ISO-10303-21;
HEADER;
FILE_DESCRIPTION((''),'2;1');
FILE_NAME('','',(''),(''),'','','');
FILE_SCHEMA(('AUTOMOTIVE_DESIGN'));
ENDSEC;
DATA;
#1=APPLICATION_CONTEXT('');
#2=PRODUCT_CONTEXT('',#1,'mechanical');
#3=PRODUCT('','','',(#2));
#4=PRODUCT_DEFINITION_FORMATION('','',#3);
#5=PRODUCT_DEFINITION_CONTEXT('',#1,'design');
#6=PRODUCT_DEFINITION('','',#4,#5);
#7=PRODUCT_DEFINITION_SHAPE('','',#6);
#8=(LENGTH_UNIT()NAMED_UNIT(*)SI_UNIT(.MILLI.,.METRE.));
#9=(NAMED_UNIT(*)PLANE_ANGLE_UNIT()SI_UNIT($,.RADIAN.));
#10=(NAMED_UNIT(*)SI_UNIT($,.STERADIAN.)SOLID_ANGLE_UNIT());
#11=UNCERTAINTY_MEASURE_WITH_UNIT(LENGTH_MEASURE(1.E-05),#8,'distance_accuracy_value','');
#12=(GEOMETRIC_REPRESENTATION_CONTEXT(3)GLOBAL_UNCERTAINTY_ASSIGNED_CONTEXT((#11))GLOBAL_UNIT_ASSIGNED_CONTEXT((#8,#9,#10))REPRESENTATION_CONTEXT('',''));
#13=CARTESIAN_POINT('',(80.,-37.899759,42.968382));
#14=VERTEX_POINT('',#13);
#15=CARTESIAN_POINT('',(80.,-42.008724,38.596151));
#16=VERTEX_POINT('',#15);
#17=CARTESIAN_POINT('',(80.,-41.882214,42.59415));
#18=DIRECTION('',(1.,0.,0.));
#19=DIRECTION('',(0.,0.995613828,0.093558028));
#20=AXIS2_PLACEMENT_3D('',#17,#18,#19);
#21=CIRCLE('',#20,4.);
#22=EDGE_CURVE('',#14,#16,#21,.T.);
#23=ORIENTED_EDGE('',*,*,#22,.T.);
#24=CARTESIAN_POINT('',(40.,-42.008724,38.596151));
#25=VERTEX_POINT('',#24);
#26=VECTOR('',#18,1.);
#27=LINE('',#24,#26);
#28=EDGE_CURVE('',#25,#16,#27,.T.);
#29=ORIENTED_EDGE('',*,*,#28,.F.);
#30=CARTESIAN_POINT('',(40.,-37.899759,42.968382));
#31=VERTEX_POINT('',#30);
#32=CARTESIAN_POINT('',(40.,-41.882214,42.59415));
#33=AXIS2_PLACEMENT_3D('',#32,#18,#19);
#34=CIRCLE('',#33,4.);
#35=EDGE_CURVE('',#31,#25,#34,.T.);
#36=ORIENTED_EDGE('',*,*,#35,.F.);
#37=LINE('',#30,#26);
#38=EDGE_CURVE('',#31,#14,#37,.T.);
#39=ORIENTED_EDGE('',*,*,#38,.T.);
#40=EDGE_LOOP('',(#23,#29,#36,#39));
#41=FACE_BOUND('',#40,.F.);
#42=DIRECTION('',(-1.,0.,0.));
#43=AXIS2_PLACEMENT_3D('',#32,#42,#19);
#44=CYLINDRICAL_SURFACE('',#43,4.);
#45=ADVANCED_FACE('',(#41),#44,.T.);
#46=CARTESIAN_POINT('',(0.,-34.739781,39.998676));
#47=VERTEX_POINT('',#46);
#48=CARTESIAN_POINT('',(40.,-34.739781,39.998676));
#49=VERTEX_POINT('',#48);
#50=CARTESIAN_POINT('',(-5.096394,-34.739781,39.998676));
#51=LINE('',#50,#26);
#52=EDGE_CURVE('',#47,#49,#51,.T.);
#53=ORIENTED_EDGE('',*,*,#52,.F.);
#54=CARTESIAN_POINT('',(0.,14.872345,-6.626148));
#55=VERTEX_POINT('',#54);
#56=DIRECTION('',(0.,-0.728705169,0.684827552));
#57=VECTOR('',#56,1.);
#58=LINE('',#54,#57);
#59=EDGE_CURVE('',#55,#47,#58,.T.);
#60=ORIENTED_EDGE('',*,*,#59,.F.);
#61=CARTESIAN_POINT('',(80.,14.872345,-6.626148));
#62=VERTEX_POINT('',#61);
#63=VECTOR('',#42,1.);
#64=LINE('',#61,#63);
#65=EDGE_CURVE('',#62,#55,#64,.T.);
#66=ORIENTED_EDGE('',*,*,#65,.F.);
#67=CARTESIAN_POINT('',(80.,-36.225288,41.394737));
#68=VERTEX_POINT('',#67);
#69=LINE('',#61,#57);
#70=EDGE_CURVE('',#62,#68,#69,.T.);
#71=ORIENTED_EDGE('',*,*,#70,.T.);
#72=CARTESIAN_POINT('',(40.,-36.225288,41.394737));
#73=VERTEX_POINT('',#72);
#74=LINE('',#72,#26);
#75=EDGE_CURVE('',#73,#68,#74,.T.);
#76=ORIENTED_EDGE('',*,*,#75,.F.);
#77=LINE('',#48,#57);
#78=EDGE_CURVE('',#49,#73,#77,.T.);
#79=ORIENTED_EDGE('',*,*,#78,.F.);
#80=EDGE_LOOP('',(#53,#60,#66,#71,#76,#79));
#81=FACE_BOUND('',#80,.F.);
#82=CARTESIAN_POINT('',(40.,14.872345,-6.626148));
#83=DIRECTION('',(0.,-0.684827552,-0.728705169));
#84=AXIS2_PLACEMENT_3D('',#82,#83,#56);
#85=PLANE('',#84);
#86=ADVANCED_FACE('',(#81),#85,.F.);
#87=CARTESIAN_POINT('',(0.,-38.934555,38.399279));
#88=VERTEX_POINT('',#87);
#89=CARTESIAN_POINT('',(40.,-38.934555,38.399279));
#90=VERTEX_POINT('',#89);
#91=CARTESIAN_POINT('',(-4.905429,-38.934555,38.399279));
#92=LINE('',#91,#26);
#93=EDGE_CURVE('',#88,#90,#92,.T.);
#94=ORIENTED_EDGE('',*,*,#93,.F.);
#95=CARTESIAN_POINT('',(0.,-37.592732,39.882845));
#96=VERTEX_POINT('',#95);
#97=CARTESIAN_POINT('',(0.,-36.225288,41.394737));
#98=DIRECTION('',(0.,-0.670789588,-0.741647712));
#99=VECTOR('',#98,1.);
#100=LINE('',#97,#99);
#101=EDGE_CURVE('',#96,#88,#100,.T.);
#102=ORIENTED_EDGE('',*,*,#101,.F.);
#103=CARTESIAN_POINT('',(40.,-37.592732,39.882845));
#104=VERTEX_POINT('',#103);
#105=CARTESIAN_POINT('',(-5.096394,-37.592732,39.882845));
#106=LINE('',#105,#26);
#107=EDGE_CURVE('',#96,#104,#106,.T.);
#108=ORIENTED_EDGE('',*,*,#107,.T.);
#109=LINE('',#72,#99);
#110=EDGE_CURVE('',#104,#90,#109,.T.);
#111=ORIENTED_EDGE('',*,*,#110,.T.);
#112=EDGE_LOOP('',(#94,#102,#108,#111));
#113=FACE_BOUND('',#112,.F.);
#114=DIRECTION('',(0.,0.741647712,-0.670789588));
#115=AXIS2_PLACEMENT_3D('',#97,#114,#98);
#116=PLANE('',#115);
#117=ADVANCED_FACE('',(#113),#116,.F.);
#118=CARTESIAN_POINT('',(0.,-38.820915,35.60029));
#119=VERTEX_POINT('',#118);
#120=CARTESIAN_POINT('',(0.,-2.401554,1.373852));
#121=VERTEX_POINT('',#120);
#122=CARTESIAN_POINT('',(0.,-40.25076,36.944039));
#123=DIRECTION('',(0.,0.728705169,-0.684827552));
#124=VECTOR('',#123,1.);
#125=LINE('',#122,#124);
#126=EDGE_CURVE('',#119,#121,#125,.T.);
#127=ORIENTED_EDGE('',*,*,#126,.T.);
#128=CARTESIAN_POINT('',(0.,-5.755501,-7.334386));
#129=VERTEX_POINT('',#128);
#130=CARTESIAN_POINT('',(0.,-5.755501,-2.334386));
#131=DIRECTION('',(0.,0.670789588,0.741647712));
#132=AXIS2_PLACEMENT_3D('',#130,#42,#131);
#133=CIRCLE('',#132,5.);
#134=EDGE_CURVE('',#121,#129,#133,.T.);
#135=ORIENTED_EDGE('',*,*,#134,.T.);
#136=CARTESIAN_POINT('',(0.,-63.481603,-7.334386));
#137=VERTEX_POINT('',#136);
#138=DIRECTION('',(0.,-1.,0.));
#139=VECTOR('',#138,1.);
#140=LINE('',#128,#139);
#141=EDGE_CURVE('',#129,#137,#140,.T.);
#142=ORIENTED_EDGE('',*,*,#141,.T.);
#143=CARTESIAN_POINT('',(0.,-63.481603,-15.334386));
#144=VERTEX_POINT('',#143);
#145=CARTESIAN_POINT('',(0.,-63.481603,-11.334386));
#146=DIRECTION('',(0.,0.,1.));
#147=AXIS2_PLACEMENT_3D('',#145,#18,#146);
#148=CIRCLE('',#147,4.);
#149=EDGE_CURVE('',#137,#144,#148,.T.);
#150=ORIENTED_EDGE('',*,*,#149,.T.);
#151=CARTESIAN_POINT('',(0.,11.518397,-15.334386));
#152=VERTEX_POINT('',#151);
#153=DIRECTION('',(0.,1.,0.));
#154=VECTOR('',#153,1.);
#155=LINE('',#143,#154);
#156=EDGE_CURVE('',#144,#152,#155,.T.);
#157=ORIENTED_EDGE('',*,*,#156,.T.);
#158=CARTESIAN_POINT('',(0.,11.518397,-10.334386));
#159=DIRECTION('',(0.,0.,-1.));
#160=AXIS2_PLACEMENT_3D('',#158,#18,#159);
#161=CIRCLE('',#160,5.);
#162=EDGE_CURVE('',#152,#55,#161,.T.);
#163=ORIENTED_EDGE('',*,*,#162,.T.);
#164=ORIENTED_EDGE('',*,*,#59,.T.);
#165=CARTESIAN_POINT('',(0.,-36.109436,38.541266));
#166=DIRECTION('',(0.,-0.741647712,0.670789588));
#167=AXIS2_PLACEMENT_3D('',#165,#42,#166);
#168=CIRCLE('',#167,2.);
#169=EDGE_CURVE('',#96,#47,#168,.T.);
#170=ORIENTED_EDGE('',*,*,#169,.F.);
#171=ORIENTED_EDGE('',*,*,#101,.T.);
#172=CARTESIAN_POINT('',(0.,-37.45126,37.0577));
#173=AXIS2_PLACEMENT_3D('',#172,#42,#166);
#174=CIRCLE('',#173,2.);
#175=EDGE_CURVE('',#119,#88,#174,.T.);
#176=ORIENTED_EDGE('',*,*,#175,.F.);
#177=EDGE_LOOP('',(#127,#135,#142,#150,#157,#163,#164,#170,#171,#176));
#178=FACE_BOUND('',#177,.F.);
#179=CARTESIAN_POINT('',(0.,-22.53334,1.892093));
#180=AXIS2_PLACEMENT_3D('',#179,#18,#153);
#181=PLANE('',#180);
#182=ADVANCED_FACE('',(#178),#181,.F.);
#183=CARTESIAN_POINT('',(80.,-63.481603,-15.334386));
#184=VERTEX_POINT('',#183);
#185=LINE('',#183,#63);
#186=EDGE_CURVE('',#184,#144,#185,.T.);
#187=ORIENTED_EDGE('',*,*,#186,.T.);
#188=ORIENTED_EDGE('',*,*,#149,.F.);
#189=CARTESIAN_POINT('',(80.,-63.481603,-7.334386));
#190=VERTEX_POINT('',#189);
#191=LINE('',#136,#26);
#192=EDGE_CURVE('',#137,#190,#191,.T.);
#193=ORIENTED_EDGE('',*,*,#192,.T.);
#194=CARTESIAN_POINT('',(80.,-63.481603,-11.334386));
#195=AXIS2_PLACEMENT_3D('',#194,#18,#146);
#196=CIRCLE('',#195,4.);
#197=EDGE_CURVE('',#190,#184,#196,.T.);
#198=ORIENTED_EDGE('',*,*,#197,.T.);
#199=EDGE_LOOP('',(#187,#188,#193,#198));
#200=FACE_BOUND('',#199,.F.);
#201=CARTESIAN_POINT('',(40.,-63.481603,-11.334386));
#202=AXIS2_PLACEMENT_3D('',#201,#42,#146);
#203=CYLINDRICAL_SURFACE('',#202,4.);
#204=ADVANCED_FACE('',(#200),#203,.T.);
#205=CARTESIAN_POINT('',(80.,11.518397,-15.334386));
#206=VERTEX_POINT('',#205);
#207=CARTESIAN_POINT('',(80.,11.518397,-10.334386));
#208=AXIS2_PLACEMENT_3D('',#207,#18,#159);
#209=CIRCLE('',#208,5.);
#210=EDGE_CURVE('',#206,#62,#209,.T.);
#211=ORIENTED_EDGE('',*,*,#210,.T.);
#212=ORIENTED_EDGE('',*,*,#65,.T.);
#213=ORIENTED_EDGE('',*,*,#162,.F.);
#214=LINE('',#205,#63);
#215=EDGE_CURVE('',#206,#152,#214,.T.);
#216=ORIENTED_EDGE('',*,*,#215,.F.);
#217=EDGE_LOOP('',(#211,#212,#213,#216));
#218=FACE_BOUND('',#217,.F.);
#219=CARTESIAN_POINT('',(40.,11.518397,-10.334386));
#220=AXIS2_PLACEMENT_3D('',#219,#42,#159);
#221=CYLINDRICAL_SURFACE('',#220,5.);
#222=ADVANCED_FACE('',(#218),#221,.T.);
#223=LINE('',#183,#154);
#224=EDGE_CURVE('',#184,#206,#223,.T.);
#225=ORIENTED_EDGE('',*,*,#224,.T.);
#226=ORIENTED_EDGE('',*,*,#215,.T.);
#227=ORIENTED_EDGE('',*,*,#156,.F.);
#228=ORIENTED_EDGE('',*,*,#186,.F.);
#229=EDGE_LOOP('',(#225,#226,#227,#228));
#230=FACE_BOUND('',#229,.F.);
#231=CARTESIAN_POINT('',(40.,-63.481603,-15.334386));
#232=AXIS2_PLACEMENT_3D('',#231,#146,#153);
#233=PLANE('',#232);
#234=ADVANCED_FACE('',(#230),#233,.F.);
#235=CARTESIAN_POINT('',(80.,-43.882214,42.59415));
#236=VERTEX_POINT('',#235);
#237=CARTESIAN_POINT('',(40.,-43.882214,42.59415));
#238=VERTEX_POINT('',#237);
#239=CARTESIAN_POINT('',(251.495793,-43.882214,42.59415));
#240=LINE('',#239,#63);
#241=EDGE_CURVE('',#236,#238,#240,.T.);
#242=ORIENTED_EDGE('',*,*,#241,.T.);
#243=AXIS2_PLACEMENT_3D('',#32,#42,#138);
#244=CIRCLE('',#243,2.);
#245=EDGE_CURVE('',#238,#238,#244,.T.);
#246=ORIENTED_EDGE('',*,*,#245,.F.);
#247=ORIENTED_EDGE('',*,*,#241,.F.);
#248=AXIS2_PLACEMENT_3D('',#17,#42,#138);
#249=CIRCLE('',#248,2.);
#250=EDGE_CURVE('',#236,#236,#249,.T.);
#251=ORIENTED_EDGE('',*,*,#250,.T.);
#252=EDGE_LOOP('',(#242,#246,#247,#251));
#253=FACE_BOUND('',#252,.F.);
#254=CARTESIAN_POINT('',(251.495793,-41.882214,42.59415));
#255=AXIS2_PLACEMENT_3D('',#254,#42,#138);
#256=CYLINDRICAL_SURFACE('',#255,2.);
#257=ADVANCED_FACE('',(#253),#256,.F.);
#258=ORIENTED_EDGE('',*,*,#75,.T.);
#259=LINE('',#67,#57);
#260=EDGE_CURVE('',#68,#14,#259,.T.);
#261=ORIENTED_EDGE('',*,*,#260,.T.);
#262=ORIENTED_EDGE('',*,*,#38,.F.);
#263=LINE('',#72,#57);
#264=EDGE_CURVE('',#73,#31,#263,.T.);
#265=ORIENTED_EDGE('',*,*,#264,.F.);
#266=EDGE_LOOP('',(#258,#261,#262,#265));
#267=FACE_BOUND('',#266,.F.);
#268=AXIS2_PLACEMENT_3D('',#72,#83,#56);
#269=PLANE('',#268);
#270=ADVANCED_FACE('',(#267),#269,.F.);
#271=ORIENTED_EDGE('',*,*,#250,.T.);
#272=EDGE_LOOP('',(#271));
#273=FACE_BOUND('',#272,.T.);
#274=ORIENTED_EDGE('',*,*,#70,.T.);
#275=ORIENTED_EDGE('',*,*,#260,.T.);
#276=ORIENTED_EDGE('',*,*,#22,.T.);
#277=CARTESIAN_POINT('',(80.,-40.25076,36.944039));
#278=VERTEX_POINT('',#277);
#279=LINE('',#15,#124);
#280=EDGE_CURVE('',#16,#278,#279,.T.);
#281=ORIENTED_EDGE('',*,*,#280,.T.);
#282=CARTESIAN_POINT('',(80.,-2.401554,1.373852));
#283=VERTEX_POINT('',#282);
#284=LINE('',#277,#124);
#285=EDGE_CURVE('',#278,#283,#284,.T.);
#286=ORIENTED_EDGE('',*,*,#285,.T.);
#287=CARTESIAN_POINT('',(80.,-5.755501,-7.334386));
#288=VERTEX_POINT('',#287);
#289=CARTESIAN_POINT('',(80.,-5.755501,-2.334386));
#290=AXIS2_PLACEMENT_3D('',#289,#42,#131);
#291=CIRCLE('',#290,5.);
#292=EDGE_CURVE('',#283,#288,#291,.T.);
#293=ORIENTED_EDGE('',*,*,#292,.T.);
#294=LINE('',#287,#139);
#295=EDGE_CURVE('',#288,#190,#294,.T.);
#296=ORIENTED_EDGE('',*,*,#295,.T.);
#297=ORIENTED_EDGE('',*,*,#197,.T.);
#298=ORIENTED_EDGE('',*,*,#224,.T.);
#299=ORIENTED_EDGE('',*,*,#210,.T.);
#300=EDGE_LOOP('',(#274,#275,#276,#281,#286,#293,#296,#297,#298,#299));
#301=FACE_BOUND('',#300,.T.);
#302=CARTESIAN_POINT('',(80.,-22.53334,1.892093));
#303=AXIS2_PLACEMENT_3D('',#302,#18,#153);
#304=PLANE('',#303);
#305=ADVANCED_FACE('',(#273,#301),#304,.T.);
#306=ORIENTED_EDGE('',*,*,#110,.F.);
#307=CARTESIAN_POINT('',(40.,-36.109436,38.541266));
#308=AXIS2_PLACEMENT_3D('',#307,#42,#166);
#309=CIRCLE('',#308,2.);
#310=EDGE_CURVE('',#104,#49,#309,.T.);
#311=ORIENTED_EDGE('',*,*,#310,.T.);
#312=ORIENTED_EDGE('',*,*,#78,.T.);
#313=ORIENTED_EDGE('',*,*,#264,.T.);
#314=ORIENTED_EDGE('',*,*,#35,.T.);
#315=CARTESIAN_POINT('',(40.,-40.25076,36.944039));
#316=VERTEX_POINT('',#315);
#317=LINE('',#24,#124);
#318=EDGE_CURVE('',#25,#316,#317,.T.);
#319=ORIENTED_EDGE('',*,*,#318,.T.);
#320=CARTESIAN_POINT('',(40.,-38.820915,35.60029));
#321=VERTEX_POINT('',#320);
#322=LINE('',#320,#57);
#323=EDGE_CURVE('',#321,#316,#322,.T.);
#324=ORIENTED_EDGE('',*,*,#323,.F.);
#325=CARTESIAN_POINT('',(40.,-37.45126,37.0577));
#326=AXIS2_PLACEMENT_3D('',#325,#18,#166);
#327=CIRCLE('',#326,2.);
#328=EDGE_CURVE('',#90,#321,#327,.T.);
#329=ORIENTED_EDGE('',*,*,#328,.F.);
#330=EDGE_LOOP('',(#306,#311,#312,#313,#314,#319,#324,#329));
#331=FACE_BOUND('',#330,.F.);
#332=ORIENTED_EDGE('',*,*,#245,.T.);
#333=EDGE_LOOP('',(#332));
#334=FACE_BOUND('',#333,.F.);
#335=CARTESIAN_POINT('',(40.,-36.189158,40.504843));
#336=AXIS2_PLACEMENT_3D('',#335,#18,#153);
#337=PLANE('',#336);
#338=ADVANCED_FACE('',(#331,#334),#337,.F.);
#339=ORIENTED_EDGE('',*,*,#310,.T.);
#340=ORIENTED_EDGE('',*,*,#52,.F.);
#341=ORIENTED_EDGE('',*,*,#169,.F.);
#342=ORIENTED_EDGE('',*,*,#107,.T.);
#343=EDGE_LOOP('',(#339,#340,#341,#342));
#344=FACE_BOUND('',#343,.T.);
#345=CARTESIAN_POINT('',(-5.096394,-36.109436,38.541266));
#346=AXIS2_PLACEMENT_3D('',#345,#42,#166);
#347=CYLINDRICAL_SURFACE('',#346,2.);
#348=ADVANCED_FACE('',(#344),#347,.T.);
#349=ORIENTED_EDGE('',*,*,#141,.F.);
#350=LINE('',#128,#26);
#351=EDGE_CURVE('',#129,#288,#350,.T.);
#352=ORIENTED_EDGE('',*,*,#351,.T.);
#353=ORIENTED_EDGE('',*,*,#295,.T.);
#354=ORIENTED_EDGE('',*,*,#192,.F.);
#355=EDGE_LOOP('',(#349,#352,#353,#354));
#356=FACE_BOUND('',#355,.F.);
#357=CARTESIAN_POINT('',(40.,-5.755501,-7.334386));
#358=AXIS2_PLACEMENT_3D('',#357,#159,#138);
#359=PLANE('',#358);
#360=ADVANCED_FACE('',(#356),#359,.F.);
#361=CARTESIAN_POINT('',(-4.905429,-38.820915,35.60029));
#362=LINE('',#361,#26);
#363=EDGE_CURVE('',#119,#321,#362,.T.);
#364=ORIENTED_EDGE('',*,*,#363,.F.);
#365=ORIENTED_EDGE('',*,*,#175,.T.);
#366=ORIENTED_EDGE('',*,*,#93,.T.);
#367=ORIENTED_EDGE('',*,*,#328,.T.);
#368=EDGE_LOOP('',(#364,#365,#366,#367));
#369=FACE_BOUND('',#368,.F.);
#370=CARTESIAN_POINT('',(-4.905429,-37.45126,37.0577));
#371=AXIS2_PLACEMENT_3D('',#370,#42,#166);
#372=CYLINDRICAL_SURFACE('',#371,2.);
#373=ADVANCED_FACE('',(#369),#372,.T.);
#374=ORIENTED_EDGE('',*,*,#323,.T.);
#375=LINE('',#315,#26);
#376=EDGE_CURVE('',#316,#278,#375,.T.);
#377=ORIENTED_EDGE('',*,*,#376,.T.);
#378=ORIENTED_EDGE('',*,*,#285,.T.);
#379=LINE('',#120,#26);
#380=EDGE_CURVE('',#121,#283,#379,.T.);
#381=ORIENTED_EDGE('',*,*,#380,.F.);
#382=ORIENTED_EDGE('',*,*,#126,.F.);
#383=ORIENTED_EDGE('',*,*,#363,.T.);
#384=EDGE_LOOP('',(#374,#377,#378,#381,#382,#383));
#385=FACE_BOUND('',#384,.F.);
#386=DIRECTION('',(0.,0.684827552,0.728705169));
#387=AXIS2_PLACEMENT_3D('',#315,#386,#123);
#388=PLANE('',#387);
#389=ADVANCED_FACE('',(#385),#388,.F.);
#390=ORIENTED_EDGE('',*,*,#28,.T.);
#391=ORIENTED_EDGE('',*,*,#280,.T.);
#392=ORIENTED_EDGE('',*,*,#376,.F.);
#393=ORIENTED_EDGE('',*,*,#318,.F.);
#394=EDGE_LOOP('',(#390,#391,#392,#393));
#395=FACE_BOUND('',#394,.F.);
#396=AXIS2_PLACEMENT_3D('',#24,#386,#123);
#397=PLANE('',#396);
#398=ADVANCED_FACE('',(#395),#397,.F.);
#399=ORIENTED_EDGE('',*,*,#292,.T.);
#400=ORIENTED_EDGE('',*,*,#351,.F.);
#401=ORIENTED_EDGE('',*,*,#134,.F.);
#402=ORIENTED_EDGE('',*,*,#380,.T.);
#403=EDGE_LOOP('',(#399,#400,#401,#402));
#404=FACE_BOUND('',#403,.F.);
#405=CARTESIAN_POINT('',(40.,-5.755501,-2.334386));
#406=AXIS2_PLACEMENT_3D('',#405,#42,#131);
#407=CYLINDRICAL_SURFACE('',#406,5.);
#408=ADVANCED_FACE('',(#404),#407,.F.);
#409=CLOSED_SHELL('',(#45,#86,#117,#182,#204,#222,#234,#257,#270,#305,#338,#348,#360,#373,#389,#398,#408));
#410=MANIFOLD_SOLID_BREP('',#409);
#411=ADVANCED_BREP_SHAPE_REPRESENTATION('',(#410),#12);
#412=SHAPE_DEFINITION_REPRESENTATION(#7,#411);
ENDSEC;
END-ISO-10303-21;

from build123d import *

# Parameters (mm, degrees)
F1_DEPTH    = 40
F4_DEPTH    = 40
F7_D        = 4
F8_T1_DEPTH = 45.0963937419
F8_T3_DEPTH = 44.9054294597


# Not quite as in the source:
# - a fillet or chamfer that OpenCascade refuses, or shapes differently, is made with other operations: its cross-section is extruded or revolved along the edge and cut away or added


with BuildPart() as f1:
    # F0 (on Right) → F1 (new body)
    with BuildSketch(Plane.YZ):
        with BuildLine():
            ThreePointArc((-63.4816033854, -7.334386461), (-67.4816033854, -11.334386461), (-63.4816033854, -15.334386461))
            Line((-63.4816033854, -15.334386461), (11.5183966146, -15.334386461))
            ThreePointArc((11.5183966146, -15.334386461), (16.1842937846, -12.1314406057), (14.8723445539, -6.6261479006))
            Line((14.8723445539, -6.6261479006), (-36.2252883959, 41.3947367846))
            Line((-36.2252883959, 41.3947367846), (-40.2507597139, 36.9440392082))
            Line((-40.2507597139, 36.9440392082), (-2.4015535455, 1.3738520994))
            ThreePointArc((-2.4015535455, 1.3738520994), (-1.0896043148, -4.1314406057), (-5.7555014847, -7.334386461))
            Line((-5.7555014847, -7.334386461), (-63.4816033854, -7.334386461))
        make_face()
    extrude(amount=F1_DEPTH)

    # F3 (on offset) → F4 (join)
    with BuildSketch(Plane.YZ.offset(40)):
        with BuildLine():
            Line((14.8723445539, -6.6261479006), (-36.2252883959, 41.3947367846))
            Line((-36.2252883959, 41.3947367846), (-40.2507597139, 36.9440392082))
            Line((-40.2507597139, 36.9440392082), (-2.4015535455, 1.3738520994))
            ThreePointArc((-2.4015535455, 1.3738520994), (-1.0896043148, -4.1314406057), (-5.7555014847, -7.334386461))
            Line((-5.7555014847, -7.334386461), (-63.4816033854, -7.334386461))
            ThreePointArc((-63.4816033854, -7.334386461), (-67.4816033854, -11.334386461), (-63.4816033854, -15.334386461))
            Line((-63.4816033854, -15.334386461), (11.5183966146, -15.334386461))
            ThreePointArc((11.5183966146, -15.334386461), (16.1842937846, -12.1314406057), (14.8723445539, -6.6261479006))
        make_face()
        with BuildLine():
            Line((-40.2507597139, 36.9440392082), (-36.2252883959, 41.3947367846))
            Line((-36.2252883959, 41.3947367846), (-37.8997588755, 42.9683821605))
            ThreePointArc((-37.8997588755, 42.9683821605), (-37.8866027682, 42.7814716227), (-37.8822141892, 42.5941500472))
            ThreePointArc((-37.8822141892, 42.5941500472), (-39.0988744687, 39.7213430575), (-42.0087241892, 38.5961511452))
            Line((-42.0087241892, 38.5961511452), (-40.2507597139, 36.9440392082))
        make_face()
        with BuildLine():
            ThreePointArc((-37.8822141892, 42.5941500472), (-37.8866027682, 42.7814716227), (-37.8997588755, 42.9683821605))
            ThreePointArc((-37.8997588755, 42.9683821605), (-44.7970348661, 45.3334602563), (-42.0087241892, 38.5961511452))
            ThreePointArc((-42.0087241892, 38.5961511452), (-39.0988744687, 39.7213430575), (-37.8822141892, 42.5941500472))
        make_face()
    extrude(amount=F4_DEPTH)

    # F7 (through all)
    with Locations(Plane.YZ.offset(120)):
        with Locations((-41.8822141892, 42.5941500472)):
            Hole(F7_D / 2)

    # F8: fillet of radius 2 on 2 edges, made by hand

    # F8_s2 → F8_t1 (cut)
    with BuildSketch(Plane.YZ.offset(-5.0963937419)):
        with BuildLine():
            ThreePointArc((-37.592731539, 39.8828452812), (-36.190570233, 40.5396197416), (-34.7397810103, 39.9986764439))
            Line((-34.7397810103, 39.9986764439), (-36.2252883959, 41.3947367846))
            Line((-36.2252883959, 41.3947367846), (-37.592731539, 39.8828452812))
        make_face()
    extrude(amount=F8_T1_DEPTH, mode=Mode.SUBTRACT)

    # F8_s4 → F8_t3 (cut)
    with BuildSketch(Plane.YZ.offset(-4.9054294597)):
        with BuildLine():
            ThreePointArc((-38.9345553117, 38.3992794224), (-39.4496135236, 36.9765661286), (-38.8209149921, 35.6002899083))
            Line((-38.8209149921, 35.6002899083), (-40.2507597139, 36.9440392082))
            Line((-40.2507597139, 36.9440392082), (-38.9345553117, 38.3992794224))
        make_face()
    extrude(amount=F8_T3_DEPTH, mode=Mode.SUBTRACT)


solid = f1.part
